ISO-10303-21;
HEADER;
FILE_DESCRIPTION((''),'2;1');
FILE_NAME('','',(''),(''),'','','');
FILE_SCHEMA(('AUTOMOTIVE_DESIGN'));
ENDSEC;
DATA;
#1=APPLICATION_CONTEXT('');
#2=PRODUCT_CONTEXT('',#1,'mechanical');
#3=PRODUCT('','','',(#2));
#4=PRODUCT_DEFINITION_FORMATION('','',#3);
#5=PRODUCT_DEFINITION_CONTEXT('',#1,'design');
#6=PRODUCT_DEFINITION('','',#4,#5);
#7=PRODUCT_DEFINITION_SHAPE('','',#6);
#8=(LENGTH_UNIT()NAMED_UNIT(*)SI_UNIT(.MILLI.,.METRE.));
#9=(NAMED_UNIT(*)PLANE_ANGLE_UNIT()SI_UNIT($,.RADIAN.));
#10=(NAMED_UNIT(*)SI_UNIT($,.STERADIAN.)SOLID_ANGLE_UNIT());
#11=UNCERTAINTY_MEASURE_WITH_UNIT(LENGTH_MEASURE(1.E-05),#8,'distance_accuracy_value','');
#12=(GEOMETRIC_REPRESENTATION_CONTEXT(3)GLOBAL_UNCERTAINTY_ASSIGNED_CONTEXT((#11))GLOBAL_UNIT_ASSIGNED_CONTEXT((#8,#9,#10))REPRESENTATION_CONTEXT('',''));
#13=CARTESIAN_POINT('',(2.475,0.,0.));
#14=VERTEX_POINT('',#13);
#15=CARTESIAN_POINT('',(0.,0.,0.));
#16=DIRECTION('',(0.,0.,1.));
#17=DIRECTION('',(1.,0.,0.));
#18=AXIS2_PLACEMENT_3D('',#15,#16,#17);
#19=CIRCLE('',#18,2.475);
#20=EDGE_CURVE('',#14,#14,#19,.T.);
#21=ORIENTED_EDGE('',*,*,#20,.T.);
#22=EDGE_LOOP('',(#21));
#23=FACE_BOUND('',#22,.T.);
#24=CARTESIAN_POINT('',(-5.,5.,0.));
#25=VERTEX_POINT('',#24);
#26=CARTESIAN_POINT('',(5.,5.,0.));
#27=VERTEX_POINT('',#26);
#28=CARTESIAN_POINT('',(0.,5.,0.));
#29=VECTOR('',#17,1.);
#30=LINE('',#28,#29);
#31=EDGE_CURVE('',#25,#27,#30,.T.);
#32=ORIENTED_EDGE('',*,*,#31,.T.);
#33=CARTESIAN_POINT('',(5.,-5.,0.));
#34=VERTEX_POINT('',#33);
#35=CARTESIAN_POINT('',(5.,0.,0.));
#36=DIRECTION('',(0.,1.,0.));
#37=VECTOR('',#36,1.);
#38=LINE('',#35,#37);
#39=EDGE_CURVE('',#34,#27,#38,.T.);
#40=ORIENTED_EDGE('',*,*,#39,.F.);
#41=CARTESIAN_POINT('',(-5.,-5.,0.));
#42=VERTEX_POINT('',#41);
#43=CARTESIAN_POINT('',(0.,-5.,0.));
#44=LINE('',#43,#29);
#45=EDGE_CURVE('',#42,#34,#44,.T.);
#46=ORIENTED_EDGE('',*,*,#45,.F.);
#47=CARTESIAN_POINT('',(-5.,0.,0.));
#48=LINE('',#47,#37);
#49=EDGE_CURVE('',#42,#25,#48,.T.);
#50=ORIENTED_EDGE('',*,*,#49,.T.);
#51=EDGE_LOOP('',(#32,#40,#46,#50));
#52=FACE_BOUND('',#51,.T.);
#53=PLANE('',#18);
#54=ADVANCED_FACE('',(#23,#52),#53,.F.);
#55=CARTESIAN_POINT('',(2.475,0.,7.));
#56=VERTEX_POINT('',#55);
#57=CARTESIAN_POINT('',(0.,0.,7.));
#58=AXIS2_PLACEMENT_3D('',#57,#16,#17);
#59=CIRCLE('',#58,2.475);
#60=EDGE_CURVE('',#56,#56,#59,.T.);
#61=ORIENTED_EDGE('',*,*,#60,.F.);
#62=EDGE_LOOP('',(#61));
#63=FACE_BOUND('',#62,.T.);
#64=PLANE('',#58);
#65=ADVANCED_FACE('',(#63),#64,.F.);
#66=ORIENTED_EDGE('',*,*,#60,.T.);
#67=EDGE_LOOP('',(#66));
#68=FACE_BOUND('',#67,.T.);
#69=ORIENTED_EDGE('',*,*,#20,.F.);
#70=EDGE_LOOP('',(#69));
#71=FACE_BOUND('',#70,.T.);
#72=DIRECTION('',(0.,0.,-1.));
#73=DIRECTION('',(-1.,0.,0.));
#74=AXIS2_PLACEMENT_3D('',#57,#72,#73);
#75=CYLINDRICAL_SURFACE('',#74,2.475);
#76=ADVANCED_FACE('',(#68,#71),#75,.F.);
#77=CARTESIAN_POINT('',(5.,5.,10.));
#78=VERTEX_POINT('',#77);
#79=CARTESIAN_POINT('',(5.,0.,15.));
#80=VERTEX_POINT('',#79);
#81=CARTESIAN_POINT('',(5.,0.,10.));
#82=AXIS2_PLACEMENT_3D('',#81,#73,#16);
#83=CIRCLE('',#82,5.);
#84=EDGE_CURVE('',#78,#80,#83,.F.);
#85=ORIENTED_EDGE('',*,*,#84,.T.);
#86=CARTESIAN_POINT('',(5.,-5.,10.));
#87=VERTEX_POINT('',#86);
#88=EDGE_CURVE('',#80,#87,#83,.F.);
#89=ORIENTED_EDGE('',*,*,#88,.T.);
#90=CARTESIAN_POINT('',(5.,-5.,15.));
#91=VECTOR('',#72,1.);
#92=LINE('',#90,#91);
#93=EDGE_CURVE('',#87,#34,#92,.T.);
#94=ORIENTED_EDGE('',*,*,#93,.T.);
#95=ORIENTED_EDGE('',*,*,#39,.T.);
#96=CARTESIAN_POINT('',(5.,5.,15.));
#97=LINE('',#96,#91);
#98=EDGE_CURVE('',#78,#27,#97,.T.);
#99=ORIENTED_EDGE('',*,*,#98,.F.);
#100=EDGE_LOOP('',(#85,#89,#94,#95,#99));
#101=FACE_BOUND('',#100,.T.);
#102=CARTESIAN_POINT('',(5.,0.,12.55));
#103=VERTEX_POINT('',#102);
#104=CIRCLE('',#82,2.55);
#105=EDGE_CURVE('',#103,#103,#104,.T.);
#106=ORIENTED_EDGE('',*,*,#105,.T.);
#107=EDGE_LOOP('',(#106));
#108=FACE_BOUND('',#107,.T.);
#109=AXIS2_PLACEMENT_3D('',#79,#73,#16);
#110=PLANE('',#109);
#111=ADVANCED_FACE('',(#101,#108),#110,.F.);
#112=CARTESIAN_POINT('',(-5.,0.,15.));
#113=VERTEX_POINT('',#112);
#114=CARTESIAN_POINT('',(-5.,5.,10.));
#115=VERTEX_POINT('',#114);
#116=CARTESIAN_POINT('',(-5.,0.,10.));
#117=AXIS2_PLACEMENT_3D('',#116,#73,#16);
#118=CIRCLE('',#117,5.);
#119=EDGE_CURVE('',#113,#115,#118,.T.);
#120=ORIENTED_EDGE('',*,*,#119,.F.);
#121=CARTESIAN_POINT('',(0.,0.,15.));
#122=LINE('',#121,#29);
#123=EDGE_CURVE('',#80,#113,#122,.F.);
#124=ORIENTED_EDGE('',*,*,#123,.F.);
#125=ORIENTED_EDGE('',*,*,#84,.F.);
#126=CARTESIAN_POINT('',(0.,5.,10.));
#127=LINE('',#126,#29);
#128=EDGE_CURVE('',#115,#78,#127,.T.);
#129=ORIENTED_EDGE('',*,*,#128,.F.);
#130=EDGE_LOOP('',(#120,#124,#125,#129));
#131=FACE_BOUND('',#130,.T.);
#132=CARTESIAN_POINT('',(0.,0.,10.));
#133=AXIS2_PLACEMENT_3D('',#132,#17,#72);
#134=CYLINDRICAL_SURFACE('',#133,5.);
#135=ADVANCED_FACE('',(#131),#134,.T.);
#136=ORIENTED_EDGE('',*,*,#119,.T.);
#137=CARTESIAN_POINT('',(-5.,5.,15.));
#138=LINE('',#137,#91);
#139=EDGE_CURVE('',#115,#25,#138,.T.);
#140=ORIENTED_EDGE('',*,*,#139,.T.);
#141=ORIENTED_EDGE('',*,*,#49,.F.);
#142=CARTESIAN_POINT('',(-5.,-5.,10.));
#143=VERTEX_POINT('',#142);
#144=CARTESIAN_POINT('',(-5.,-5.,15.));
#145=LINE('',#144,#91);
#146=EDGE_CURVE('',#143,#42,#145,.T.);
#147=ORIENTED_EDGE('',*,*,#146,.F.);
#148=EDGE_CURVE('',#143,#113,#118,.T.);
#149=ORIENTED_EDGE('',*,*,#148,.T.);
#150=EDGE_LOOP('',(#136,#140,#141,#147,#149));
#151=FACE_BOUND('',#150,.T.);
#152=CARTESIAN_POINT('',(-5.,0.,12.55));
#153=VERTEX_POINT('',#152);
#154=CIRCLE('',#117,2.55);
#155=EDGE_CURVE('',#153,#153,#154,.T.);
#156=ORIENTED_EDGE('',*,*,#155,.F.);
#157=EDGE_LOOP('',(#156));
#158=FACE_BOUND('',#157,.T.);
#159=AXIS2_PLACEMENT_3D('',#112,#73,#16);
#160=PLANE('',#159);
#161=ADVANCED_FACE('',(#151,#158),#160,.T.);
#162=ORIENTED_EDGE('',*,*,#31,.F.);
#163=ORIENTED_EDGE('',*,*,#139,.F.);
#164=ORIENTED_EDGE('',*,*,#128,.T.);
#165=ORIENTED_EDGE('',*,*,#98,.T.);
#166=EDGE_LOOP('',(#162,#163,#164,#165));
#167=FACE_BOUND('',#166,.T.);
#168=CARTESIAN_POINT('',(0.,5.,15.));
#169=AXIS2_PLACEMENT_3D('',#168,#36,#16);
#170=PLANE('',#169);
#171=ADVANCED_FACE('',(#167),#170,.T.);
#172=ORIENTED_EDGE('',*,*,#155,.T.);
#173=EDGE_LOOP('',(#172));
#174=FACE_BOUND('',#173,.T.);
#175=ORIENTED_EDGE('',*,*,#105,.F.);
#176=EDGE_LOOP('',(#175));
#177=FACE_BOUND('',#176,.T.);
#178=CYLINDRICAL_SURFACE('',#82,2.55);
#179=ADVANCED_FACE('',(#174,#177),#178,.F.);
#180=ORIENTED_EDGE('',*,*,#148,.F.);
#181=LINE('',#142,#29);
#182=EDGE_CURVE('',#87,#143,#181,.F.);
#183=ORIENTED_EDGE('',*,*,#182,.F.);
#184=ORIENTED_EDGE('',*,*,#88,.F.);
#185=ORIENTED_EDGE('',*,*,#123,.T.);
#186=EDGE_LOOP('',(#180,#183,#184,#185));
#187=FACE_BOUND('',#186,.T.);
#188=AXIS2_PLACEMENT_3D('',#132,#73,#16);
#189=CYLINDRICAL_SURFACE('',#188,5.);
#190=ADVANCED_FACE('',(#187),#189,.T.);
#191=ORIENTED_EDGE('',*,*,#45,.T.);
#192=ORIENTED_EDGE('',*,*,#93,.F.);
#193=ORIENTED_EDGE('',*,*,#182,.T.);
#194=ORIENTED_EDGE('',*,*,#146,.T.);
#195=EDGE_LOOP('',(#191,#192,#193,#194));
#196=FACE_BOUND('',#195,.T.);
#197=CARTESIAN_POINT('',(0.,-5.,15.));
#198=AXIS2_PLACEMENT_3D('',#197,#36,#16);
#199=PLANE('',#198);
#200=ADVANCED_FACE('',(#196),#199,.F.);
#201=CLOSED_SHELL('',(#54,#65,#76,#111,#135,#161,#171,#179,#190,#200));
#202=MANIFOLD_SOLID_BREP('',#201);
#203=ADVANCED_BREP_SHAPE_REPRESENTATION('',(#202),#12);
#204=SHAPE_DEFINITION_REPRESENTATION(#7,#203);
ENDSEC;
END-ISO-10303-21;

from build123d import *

# Parameters (mm, degrees)
SKETCH1_W           = 10
SKETCH1_H           = 10
SKETCH1_R           = 2.475
BOSS_EXTRUDE2_DEPTH = 15
SKETCH2_R           = 2.55
CUT_EXTRUDE1_DEPTH  = 10
FILLET1_R           = 5
SKETCH1_5_R         = 2.475
CUT_EXTRUDE2_DEPTH  = 7


with BuildPart() as part:
    # Sketch1 → Boss-Extrude2 (new body)
    # profile 1 of 2: a face of its own
    with BuildSketch(Plane.XY):
        Rectangle(SKETCH1_W, SKETCH1_H)
        Circle(SKETCH1_R, mode=Mode.SUBTRACT)
    # profile 2 of 2: a face of its own
    with BuildSketch(Plane.XY):
        Circle(SKETCH1_R)
    extrude(amount=BOSS_EXTRUDE2_DEPTH)

    # Sketch2 → Cut-Extrude1 (cut)
    with BuildSketch(Plane.ZY.offset(5)):
        with Locations((10, 0)):
            Circle(SKETCH2_R)
    extrude(amount=-CUT_EXTRUDE1_DEPTH, mode=Mode.SUBTRACT)

    # Fillet1
    fillet1_edges = [part.edges().sort_by_distance(p)[0] for p in [
        (0, -5, 15),
        (0, 5, 15),
    ]]
    fillet(fillet1_edges, radius=FILLET1_R - 0.0001)  # a hair under: the kernel refuses the full size

    # Sketch1<5> → Cut-Extrude2 (cut)
    with BuildSketch(Plane.XY):
        Circle(SKETCH1_5_R)
    extrude(amount=CUT_EXTRUDE2_DEPTH, mode=Mode.SUBTRACT)


solid = part.part
